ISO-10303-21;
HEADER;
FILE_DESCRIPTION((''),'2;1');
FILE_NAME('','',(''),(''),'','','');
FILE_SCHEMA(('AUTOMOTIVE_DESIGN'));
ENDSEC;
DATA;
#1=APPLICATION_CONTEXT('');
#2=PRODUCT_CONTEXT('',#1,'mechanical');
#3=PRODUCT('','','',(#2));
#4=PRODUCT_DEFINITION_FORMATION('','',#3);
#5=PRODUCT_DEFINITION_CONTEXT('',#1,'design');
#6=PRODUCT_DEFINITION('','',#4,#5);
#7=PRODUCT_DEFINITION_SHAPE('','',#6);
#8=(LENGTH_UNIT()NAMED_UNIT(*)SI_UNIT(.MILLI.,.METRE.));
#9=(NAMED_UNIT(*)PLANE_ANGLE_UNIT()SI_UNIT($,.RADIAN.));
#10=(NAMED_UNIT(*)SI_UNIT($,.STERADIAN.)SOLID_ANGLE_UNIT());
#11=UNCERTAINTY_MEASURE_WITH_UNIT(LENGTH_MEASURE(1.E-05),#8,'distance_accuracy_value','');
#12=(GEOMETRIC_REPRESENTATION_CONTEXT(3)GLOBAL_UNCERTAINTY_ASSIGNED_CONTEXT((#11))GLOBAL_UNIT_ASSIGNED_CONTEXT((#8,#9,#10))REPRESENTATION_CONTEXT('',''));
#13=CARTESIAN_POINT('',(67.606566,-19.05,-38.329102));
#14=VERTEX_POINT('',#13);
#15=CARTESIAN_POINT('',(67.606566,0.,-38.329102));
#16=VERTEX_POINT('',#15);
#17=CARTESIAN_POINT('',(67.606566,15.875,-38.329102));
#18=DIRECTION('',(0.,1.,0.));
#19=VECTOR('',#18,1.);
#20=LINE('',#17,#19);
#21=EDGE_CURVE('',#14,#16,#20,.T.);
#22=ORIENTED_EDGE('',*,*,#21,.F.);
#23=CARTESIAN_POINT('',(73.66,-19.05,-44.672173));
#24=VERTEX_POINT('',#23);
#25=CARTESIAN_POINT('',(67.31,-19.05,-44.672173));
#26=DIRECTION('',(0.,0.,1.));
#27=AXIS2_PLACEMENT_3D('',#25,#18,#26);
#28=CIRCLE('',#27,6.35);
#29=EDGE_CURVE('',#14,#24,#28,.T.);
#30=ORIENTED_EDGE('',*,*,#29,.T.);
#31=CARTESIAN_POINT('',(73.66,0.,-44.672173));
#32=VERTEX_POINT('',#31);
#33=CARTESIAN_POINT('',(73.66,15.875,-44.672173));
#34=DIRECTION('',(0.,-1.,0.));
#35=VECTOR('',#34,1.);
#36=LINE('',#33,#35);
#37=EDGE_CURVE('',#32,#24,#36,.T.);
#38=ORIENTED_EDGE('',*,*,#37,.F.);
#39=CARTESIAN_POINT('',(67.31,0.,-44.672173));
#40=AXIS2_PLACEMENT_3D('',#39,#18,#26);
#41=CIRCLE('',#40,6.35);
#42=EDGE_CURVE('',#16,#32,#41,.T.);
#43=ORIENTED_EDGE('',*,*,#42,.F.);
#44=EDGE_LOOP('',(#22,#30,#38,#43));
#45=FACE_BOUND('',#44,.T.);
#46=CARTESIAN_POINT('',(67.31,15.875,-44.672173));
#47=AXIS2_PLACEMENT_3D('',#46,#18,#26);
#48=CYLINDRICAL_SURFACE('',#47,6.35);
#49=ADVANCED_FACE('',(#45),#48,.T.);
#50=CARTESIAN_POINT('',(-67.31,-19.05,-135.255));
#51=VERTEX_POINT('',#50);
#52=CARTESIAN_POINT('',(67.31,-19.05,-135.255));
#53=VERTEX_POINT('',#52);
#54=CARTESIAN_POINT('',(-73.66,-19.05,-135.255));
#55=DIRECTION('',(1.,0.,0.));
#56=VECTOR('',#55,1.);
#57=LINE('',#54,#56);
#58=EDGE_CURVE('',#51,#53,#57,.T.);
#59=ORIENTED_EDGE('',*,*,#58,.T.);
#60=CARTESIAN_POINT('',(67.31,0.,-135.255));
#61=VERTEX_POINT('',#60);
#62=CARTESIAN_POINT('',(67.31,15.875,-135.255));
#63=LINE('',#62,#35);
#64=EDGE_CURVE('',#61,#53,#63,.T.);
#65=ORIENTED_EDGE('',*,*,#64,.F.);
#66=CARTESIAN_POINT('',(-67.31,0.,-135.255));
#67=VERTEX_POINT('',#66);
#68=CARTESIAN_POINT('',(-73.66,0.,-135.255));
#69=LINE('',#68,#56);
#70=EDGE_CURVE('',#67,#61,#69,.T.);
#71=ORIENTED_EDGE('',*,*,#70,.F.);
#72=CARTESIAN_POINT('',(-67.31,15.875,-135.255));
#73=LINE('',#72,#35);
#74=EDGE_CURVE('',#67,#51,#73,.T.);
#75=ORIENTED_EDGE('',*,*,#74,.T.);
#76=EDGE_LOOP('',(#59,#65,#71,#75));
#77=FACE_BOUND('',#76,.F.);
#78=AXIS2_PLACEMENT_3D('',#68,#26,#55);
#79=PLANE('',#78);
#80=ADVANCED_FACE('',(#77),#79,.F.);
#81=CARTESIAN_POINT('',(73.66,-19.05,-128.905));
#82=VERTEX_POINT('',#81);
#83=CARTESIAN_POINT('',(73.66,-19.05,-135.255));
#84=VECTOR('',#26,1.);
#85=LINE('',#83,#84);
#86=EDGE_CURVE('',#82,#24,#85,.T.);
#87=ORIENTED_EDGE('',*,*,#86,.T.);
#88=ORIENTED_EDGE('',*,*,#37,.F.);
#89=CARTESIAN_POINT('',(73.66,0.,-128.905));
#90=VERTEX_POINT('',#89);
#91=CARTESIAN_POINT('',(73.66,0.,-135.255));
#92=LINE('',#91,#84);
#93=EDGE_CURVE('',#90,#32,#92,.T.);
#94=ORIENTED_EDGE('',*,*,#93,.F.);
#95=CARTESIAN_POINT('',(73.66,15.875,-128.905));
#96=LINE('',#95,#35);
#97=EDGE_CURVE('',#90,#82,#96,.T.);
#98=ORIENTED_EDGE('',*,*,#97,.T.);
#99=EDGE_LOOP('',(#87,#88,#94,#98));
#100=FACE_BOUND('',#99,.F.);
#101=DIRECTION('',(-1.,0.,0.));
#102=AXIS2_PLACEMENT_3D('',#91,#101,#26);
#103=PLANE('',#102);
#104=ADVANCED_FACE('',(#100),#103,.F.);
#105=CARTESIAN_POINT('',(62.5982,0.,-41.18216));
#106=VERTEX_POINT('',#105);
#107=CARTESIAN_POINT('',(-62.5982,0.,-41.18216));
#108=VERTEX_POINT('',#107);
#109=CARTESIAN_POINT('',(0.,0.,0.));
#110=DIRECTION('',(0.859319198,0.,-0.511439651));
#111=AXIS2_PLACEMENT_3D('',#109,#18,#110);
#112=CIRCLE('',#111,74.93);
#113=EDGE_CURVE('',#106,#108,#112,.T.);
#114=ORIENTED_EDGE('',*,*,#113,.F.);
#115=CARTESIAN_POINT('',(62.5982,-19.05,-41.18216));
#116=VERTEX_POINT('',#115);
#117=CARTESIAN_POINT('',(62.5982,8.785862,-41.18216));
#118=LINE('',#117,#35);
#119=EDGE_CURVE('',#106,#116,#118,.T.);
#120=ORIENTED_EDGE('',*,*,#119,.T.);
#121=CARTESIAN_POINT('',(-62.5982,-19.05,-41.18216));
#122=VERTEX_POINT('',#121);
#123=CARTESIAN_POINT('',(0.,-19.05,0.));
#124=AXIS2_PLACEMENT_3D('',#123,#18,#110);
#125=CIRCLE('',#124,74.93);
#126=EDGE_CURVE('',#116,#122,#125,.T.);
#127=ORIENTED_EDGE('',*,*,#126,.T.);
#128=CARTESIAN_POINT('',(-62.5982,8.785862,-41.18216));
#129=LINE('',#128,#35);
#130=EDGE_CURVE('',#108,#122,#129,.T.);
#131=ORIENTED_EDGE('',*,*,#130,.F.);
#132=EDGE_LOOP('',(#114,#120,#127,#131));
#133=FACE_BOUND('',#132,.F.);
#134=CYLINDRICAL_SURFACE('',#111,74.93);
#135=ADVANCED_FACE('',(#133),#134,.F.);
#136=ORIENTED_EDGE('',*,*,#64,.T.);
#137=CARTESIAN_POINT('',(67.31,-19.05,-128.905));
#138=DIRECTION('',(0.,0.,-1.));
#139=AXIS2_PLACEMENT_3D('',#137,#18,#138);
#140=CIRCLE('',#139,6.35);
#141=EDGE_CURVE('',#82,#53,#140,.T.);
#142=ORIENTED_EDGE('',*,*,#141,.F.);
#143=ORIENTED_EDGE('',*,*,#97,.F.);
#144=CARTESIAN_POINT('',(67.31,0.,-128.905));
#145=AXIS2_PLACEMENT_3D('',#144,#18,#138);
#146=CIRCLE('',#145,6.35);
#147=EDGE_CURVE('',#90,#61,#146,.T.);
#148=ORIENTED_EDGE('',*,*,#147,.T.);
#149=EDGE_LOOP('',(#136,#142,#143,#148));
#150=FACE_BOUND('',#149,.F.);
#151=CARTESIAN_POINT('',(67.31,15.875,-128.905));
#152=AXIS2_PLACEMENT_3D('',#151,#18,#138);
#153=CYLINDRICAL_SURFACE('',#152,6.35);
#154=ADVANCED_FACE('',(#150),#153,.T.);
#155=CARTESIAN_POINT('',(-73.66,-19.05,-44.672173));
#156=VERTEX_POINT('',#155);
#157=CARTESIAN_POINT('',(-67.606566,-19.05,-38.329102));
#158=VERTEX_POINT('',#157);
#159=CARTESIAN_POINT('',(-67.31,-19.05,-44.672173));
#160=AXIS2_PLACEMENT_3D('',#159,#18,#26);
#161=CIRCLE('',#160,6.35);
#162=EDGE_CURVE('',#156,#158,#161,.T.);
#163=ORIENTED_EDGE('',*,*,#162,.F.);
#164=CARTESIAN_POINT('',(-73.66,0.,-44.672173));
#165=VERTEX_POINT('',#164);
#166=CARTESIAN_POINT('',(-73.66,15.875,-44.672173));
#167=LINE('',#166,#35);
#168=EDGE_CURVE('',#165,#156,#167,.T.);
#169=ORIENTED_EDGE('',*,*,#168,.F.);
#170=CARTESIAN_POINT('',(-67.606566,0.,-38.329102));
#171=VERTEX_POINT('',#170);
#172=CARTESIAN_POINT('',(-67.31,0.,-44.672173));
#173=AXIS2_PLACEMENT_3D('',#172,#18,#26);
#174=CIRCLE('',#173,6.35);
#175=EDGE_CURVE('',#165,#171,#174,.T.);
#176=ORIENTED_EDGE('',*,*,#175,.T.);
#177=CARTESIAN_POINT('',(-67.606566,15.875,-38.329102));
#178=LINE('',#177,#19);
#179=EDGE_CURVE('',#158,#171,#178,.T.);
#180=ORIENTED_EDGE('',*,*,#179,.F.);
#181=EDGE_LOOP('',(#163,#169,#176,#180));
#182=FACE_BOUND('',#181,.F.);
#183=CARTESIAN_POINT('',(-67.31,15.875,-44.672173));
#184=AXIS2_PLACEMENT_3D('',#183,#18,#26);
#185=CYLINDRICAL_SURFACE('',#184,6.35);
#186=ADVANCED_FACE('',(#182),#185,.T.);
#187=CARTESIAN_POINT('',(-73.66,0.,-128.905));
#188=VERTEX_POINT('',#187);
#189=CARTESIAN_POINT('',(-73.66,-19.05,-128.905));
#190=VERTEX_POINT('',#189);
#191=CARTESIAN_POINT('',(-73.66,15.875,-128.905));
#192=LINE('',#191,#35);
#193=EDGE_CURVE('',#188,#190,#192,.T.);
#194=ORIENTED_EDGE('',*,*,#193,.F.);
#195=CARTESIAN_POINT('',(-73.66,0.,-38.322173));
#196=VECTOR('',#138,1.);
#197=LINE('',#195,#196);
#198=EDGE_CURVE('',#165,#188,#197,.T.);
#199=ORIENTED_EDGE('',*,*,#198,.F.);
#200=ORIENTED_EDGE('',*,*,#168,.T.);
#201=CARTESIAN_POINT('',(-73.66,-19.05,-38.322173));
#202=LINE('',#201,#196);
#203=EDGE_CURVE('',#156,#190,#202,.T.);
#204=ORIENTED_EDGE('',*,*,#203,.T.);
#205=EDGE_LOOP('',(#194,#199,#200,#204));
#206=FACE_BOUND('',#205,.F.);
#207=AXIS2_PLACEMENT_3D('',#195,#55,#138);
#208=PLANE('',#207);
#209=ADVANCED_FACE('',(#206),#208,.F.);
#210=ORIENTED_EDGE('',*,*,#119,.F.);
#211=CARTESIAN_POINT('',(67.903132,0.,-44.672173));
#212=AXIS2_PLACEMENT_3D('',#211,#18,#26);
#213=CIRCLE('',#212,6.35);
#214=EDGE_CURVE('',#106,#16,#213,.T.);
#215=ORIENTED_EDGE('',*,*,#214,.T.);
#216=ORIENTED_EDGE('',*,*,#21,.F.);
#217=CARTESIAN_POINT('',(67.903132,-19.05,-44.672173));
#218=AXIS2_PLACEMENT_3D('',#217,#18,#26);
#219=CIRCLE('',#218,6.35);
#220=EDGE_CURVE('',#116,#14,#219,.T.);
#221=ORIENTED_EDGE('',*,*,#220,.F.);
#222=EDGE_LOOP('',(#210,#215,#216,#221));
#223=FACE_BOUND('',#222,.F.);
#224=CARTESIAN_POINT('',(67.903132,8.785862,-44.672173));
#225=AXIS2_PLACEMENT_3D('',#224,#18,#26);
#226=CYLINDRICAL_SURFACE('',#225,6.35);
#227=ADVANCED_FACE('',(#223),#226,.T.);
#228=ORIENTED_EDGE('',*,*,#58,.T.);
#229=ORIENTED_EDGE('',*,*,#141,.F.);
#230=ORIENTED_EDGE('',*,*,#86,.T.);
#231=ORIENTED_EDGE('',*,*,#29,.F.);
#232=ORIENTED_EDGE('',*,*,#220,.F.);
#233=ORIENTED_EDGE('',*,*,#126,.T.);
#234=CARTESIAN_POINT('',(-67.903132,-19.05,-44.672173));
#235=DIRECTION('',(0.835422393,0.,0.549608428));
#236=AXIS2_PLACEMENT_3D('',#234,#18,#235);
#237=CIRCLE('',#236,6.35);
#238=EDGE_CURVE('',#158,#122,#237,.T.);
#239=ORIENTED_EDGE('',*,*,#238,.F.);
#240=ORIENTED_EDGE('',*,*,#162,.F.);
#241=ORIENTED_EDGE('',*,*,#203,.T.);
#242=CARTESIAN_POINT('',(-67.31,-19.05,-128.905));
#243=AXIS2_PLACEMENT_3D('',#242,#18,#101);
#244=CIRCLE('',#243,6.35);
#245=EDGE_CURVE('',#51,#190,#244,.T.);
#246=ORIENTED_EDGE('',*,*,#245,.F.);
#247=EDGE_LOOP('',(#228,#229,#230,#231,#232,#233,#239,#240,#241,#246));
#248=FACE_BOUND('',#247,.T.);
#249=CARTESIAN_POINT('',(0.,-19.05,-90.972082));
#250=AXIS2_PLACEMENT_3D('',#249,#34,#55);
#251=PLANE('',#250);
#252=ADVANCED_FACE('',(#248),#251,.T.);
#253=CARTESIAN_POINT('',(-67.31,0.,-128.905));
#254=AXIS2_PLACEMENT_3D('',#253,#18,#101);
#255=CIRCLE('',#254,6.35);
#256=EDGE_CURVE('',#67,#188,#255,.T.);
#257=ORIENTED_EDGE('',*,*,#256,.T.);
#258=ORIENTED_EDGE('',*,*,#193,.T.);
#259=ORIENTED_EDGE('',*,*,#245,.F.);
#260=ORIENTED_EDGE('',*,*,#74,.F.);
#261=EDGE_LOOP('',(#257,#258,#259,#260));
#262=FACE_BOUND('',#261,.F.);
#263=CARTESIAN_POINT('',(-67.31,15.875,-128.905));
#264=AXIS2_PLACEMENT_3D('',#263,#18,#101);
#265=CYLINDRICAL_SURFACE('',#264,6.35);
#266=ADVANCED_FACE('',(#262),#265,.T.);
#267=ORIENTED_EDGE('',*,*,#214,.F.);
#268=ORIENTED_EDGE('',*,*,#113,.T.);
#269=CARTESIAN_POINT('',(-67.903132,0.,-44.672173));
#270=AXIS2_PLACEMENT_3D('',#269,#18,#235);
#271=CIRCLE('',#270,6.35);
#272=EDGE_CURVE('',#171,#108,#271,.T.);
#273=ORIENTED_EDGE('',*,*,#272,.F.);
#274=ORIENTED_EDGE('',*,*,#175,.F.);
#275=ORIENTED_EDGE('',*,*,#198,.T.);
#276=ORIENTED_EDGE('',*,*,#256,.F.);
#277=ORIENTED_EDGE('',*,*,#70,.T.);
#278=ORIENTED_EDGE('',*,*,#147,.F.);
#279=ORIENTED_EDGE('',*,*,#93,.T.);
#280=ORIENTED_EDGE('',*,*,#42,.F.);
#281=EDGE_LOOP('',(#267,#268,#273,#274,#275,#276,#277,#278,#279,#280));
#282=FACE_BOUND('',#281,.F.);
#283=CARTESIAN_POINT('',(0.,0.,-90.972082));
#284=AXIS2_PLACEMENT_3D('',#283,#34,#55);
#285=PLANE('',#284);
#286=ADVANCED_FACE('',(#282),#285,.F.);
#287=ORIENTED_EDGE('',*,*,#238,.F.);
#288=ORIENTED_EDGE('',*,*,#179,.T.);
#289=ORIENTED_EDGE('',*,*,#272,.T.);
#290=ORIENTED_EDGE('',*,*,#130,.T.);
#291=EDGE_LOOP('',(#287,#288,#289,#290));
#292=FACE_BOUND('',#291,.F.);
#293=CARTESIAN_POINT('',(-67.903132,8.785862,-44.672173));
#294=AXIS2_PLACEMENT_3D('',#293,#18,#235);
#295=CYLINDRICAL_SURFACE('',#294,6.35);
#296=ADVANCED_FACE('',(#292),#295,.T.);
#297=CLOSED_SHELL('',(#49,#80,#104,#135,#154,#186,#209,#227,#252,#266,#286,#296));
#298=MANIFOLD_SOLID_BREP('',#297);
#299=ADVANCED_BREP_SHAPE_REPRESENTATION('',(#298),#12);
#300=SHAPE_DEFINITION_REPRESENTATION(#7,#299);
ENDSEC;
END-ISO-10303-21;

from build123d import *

# Parameters (mm, degrees)
F1_DEPTH    = 19.05
F2_T1_DEPTH = 50.8
F2_T3_DEPTH = 36.6217233344


# Not quite as in the source:
# - a fillet or chamfer that OpenCascade refuses, or shapes differently, is made with other operations: its cross-section is extruded or revolved along the edge and cut away or added


with BuildPart() as f1:
    # F0 (on Front) → F1 (new body)
    with BuildSketch(Plane.XZ):
        with BuildLine():
            ThreePointArc((64.3887874714, -38.322173059), (0, -74.93), (-64.3887874714, -38.322173059))
            Line((-64.3887874714, -38.322173059), (-73.66, -38.322173059))
            Line((-73.66, -38.322173059), (-73.66, -135.255))
            Line((-73.66, -135.255), (73.66, -135.255))
            Line((73.66, -135.255), (73.66, -38.322173059))
            Line((73.66, -38.322173059), (64.3887874714, -38.322173059))
        make_face()
    extrude(amount=F1_DEPTH)

    # F2: fillet of radius 6.35 on 6 edges, made by hand

    # F2_s2 → F2_t1 (cut)
    with BuildSketch(Plane.XZ.offset(-15.875)):
        with BuildLine():
            ThreePointArc((67.31, -38.322173059), (71.8001280605, -40.1820449985), (73.66, -44.672173059))
            Line((73.66, -44.672173059), (73.66, -38.322173059))
            Line((73.66, -38.322173059), (67.31, -38.322173059))
        make_face()
        with BuildLine():
            ThreePointArc((-67.31, -38.322173059), (-71.8001280605, -40.1820449985), (-73.66, -44.672173059))
            Line((-73.66, -44.672173059), (-73.66, -38.322173059))
            Line((-73.66, -38.322173059), (-67.31, -38.322173059))
        make_face()
        with BuildLine():
            ThreePointArc((67.31, -135.255), (71.8001280605, -133.3951280605), (73.66, -128.905))
            Line((73.66, -128.905), (73.66, -135.255))
            Line((73.66, -135.255), (67.31, -135.255))
        make_face()
        with BuildLine():
            ThreePointArc((-73.66, -128.905), (-71.8001280605, -133.3951280605), (-67.31, -135.255))
            Line((-67.31, -135.255), (-73.66, -135.255))
            Line((-73.66, -135.255), (-73.66, -128.905))
        make_face()
    extrude(amount=F2_T1_DEPTH, mode=Mode.SUBTRACT)

    # F2_s4 → F2_t3 (cut)
    with BuildSketch(Plane.XZ.offset(-8.7858616672)):
        with BuildLine():
            ThreePointArc((-62.59819994, -41.1821595388), (-64.889752462, -39.0827148628), (-67.9031321383, -38.322173059))
            Line((-67.9031321383, -38.322173059), (-64.3887874714, -38.322173059))
            ThreePointArc((-64.3887874714, -38.322173059), (-63.5095947367, -39.7622468729), (-62.59819994, -41.1821595388))
        make_face()
        with BuildLine():
            ThreePointArc((67.9031321383, -38.322173059), (64.889752462, -39.0827148628), (62.59819994, -41.1821595388))
            ThreePointArc((62.59819994, -41.1821595388), (63.5095947367, -39.7622468729), (64.3887874714, -38.322173059))
            Line((64.3887874714, -38.322173059), (67.9031321383, -38.322173059))
        make_face()
    extrude(amount=F2_T3_DEPTH, mode=Mode.SUBTRACT)


solid = f1.part
